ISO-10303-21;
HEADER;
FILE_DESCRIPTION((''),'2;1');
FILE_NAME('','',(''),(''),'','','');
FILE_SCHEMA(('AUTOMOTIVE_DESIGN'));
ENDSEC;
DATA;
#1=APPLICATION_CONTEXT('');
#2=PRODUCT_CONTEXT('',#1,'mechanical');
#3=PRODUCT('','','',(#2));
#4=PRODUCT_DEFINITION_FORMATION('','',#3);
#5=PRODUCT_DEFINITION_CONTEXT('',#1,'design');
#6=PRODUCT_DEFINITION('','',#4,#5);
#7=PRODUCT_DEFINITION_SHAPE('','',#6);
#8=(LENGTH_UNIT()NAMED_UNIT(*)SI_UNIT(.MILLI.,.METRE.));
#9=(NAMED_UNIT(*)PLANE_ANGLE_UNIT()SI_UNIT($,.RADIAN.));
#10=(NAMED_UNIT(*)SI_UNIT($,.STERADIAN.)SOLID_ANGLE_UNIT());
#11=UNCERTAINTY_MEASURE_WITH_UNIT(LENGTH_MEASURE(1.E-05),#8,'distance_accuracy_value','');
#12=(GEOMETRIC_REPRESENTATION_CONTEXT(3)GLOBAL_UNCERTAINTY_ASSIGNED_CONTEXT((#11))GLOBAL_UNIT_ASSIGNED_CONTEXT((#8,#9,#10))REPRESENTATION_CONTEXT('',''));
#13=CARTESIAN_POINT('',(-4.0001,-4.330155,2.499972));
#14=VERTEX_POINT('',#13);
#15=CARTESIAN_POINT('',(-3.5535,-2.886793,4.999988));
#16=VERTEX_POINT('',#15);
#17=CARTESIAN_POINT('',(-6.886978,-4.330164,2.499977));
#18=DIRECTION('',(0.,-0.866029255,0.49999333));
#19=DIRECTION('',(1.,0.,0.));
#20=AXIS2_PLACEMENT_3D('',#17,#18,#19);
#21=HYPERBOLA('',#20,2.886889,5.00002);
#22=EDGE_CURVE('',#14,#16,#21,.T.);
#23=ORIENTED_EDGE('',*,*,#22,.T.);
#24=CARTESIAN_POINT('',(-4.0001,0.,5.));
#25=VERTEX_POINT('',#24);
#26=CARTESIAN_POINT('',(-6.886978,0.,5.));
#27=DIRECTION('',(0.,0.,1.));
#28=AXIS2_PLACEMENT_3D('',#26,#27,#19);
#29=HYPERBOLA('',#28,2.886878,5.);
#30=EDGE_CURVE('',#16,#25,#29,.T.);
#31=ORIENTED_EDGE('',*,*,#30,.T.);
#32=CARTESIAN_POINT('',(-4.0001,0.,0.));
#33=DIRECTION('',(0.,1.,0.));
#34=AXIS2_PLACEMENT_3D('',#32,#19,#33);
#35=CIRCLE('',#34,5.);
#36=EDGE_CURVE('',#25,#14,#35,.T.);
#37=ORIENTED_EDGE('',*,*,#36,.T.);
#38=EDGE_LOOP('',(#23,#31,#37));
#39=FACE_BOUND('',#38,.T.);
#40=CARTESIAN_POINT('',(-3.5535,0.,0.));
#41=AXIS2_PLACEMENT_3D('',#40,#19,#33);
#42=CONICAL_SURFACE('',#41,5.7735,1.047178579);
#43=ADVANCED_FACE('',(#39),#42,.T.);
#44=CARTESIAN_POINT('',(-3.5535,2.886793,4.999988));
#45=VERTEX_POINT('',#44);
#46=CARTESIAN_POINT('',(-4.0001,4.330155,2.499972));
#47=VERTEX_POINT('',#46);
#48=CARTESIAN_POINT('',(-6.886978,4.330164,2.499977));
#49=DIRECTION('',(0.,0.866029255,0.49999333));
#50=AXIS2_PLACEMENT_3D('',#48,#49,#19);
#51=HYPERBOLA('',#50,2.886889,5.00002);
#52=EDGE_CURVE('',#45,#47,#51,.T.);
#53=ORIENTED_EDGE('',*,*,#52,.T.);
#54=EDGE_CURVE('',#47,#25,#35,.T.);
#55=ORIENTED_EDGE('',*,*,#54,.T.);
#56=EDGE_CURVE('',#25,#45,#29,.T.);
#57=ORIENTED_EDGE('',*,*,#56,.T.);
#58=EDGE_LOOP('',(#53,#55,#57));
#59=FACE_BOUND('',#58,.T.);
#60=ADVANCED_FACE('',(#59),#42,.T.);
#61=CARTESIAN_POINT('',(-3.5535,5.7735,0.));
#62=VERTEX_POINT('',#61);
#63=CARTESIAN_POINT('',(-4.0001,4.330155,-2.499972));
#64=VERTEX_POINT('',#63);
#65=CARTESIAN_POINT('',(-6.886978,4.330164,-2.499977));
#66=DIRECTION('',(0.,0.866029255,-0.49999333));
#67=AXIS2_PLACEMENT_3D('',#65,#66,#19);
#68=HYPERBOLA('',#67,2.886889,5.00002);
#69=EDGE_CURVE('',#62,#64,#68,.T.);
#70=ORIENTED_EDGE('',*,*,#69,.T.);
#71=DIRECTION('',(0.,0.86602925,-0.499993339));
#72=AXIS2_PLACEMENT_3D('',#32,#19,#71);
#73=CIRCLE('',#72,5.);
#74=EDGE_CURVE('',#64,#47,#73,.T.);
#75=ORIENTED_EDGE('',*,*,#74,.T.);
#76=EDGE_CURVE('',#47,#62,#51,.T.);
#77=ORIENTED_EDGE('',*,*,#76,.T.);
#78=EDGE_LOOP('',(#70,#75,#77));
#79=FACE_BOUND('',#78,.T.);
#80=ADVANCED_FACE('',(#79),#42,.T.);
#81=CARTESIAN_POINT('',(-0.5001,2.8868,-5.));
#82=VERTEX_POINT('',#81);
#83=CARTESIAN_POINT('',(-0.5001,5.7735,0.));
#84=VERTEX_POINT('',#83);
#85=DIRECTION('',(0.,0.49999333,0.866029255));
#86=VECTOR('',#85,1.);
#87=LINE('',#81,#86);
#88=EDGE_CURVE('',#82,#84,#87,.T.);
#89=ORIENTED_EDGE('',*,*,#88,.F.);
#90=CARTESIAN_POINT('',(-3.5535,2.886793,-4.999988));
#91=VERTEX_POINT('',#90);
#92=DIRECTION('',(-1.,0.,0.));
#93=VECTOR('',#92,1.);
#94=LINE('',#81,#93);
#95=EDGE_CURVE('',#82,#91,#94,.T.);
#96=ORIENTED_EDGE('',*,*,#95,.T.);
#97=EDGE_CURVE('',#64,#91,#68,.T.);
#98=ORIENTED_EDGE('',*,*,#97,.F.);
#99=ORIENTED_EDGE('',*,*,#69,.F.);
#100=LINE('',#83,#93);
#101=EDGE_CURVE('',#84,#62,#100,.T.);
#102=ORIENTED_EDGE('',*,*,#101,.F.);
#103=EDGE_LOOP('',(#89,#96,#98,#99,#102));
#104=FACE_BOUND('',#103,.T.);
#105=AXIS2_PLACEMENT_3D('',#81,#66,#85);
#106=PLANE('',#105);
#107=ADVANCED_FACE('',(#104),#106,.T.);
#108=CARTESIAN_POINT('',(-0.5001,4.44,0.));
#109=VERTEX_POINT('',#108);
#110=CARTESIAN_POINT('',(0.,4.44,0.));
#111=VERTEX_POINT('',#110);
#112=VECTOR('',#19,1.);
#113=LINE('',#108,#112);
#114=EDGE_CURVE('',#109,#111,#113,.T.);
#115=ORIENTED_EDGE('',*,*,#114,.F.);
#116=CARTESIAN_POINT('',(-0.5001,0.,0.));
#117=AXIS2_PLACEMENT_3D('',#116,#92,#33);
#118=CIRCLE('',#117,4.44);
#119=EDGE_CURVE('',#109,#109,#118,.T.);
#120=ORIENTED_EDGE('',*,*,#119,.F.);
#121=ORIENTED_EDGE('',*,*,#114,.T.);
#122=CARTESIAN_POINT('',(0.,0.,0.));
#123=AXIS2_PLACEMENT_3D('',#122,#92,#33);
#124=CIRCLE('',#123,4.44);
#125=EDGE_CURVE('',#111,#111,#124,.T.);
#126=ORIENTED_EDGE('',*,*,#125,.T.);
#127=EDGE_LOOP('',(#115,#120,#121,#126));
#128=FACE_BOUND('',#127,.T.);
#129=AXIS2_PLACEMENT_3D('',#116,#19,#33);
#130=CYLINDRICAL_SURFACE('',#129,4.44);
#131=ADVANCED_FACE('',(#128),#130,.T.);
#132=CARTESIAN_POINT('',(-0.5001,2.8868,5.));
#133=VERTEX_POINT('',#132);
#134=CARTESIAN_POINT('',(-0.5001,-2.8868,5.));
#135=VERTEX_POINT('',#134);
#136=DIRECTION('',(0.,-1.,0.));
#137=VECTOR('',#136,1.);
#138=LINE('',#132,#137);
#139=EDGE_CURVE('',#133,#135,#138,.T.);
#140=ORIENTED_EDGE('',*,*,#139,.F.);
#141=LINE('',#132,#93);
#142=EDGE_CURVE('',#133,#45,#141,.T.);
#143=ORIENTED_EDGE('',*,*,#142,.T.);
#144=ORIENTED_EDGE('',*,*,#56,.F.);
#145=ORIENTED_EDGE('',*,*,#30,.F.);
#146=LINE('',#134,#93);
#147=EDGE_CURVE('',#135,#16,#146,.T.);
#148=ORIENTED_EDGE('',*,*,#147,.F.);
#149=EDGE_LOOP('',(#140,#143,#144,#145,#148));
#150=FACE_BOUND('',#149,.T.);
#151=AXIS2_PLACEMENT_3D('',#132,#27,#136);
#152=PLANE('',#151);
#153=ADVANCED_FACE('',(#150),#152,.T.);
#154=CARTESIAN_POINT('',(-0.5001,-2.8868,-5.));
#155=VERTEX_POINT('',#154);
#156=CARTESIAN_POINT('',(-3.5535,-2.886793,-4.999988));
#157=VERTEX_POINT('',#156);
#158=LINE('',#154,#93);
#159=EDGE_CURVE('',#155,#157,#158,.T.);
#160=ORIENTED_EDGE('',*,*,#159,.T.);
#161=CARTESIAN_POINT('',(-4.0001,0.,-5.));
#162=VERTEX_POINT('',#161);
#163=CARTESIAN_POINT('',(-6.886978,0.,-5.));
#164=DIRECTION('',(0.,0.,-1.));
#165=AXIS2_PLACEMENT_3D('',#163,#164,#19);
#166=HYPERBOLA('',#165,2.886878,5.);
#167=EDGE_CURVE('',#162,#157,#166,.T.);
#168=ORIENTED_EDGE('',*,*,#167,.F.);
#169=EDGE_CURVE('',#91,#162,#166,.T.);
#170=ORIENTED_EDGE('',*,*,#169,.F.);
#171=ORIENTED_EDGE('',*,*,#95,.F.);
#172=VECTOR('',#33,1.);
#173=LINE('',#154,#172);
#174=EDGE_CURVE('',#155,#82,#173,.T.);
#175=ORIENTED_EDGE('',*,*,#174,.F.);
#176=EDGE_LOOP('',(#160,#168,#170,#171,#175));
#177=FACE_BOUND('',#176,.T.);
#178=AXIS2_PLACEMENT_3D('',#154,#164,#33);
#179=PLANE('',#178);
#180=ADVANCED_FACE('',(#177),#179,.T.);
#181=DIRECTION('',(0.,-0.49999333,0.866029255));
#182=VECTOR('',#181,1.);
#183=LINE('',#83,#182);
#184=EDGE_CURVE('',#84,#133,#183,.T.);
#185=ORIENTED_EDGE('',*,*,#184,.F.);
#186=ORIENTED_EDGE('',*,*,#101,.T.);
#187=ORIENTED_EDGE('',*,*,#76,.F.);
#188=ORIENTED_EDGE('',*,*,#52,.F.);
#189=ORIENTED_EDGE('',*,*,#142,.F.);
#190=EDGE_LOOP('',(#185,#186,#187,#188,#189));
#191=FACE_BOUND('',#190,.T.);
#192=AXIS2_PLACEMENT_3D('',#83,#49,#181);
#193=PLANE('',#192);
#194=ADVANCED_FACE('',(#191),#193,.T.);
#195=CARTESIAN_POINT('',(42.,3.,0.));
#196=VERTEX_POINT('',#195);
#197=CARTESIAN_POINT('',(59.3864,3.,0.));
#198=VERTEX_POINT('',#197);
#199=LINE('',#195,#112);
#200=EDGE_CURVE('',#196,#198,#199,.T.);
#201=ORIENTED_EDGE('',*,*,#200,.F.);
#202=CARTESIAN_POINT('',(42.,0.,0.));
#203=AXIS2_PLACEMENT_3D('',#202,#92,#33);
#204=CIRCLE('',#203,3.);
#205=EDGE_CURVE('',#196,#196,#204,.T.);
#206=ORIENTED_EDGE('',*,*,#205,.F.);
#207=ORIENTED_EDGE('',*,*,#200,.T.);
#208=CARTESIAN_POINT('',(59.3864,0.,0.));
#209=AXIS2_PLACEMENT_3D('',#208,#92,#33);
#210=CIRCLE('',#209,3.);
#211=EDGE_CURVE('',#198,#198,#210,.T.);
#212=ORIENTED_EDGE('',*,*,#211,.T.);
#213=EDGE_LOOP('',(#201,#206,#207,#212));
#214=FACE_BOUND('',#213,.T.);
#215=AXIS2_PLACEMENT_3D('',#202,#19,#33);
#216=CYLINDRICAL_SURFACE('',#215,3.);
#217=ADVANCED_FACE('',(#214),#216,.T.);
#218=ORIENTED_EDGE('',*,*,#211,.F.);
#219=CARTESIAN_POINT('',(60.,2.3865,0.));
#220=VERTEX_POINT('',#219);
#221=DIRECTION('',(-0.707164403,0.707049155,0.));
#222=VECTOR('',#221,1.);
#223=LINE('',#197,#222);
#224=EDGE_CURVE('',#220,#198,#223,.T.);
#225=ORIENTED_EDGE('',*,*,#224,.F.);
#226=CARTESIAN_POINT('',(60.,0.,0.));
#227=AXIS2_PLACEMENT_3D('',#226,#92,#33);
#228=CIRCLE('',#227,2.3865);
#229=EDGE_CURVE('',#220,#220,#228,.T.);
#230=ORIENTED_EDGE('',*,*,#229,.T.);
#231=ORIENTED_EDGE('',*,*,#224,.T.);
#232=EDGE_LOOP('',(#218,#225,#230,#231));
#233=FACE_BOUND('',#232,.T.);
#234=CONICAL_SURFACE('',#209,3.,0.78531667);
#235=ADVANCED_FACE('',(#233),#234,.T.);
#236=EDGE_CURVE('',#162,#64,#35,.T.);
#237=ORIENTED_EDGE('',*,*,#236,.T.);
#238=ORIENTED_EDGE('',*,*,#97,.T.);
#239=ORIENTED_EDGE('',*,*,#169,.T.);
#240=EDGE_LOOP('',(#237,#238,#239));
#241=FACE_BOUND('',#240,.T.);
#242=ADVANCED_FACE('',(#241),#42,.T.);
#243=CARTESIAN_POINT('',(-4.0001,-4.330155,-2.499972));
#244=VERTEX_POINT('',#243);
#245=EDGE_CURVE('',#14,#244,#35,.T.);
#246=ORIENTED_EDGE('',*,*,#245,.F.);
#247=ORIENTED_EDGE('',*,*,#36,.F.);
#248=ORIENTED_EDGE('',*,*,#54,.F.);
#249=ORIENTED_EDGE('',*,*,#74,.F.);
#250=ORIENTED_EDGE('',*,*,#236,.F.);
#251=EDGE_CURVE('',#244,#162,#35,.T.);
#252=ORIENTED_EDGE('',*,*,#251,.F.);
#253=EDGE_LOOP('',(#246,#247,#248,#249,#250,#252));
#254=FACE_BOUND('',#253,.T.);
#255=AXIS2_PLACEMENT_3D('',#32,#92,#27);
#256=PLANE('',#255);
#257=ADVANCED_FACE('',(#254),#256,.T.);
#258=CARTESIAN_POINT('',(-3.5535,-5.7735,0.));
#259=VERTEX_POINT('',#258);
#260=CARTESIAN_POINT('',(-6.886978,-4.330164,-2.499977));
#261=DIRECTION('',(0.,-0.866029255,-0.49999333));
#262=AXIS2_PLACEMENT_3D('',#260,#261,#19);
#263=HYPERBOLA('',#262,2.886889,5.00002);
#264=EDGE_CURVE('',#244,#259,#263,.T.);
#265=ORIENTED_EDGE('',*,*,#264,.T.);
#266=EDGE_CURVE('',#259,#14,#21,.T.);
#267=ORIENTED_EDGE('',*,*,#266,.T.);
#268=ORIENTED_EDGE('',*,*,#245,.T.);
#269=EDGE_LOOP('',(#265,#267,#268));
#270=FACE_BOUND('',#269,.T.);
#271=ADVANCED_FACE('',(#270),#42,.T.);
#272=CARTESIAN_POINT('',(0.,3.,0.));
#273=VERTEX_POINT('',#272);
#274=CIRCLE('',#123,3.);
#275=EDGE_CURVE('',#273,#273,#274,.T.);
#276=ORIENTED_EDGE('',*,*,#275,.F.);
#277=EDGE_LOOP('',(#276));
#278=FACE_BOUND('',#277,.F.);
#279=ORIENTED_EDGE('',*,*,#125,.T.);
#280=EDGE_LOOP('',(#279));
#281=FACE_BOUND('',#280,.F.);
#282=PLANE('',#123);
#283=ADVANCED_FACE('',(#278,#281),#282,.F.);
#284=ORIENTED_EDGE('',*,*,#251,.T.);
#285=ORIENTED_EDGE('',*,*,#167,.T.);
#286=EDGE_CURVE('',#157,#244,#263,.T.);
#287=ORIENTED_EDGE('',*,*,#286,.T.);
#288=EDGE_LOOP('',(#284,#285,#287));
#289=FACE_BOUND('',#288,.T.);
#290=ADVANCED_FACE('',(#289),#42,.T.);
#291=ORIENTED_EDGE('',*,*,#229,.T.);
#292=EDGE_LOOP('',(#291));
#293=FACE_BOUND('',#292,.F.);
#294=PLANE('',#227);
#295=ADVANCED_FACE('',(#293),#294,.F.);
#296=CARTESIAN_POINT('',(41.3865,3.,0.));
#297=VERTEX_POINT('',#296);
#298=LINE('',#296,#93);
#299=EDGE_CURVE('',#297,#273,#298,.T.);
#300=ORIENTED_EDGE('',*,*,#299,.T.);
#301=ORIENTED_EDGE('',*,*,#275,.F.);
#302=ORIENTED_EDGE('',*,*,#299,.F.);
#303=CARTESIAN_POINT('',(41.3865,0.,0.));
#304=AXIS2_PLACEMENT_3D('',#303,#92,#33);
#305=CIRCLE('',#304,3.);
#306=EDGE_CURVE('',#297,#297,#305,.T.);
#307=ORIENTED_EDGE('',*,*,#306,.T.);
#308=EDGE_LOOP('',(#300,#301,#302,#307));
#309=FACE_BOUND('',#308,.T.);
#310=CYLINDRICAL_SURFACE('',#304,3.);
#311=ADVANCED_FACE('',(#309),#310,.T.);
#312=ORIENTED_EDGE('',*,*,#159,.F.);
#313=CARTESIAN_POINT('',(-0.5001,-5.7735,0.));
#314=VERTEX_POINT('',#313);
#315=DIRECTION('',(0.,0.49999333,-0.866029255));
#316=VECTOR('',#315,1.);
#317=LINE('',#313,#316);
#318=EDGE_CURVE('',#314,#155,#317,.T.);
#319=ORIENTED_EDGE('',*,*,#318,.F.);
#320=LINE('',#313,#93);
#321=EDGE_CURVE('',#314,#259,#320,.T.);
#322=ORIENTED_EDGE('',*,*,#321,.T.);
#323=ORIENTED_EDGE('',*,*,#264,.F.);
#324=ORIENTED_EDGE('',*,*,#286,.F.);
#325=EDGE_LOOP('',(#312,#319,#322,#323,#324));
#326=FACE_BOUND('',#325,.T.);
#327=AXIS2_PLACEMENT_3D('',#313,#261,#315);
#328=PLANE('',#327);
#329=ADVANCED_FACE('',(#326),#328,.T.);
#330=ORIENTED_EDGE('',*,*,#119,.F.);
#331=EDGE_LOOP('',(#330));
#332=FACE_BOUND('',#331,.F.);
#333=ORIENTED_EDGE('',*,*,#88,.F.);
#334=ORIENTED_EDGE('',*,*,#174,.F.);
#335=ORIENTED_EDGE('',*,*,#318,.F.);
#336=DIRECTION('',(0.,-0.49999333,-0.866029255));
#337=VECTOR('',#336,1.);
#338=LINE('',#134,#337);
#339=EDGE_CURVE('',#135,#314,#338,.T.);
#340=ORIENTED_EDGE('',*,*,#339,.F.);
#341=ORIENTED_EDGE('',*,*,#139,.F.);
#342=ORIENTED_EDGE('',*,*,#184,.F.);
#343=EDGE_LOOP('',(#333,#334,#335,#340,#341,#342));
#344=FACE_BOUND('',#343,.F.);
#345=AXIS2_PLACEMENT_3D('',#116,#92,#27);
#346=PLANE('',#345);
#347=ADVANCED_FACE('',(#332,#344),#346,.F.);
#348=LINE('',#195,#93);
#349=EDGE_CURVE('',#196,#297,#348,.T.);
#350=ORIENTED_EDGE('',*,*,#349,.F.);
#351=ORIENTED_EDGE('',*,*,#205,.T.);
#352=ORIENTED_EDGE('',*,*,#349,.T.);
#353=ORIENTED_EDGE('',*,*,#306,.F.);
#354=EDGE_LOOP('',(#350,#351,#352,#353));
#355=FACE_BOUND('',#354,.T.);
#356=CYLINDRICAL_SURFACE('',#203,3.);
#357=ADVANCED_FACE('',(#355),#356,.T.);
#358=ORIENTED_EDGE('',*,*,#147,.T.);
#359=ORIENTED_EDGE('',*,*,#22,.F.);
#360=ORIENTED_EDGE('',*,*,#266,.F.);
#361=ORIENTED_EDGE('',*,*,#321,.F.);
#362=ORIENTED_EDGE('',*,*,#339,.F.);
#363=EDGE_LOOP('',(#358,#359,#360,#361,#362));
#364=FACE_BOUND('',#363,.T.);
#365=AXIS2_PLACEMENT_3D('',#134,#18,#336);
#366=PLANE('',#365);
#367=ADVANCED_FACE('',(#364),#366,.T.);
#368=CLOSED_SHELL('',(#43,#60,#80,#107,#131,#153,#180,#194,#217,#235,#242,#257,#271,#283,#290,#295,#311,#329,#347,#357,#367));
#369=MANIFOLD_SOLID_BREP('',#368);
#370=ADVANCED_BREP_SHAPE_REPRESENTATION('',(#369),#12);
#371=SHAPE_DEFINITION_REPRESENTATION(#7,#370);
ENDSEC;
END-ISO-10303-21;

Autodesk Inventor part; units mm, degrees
ref_plane "YZ Plane" through (0, 0, 0) normal (1, 0, 0) x (0, 1, 0)
ref_plane "XZ Plane" through (0, 0, 0) normal (0, 1, 0) x (-1, 0, 0)
sketch "Sketch1" plane through (0, 0, 0) normal (0, 0, 1) x (1, 0, 0)
  line L0 (0, 4.44) -> (0, 3)
  line L1 (42, 3) -> (60, 3)
  line L2 (60, 3) -> (60, 0)
  line L3 (60, 0) -> (-0.5001, 0)
  line L4 (-12.6001, 0) -> (72.1, 0) projected
  line L5 (-0.5001, 0) -> (-0.5001, 4.44)
  line L6 (-0.5001, 4.44) -> (0, 4.44)
  line L7 (42, 3) -> (41.3865, 3)
  line L8 (41.3865, 3) -> (0, 3)
  line L9 (0, -0.888) -> (0, 5.328) projected
  dimension "d0" = 60
  dimension "d1" = 18
  dimension "d2" = 6
  dimension "d9" = 0.5001
  dimension "d10" = 8.88
  dimension "d13" = 0.6136
  dimension "d14" = 6
revolve "Body" add sketch "Sketch1" angle 360 about axis through (60, 0, 0) along (-1, 0, 0)
sketch "Sketch2" plane through (-0.5001, 0, 0) normal (-1, 0, 0) x (0, 0, 1)
  line L0 (0, 5.7735) -> (5, 2.8868)
  line L1 (5, 2.8868) -> (5, -2.8868)
  line L2 (5, -2.8868) -> (0, -5.7735)
  line L3 (0, -5.7735) -> (-5, -2.8868)
  line L4 (-5, -2.8868) -> (-5, 2.8868)
  line L5 (-5, 2.8868) -> (0, 5.7735)
  point P0 (0, 0)
  point P1 (0, 0)
  dimension "d11" = 10
extrude "Head" add sketch "Sketch2" along normal blind 3.5
sketch "Sketch4" plane through (0, 0, 0) normal (0, 0, 1) x (1, 0, 0)
  line L0 (-4.0001, 5) -> (-4.0001, 5.7735)
  line L1 (-4.0001, 5.7735) -> (-3.5535, 5.7735)
  line L2 (-3.5535, 5.7735) -> (-4.0001, 5)
  line L3 (-4.7001, 0) -> (0.1999, 0) projected
  line L4 (-0.5001, 5.7735) -> (-4.0001, 5.7735) projected
  line L5 (-4.0001, 2.8868) -> (-4.0001, 5.7735) projected
  dimension "d5" = 30
  dimension "d19" = 10
revolve "Chamfer1" cut sketch "Sketch4" angle 360 about axis through (-10, 0, 0) along (1, 0, 0)
thread "Thread" size "M6x1" class "6g" standard "ISO Metric profile" length 18
chamfer "Chamfer2" distance 0.6135 distance2 0.6136 1 edges at (60, -3, 0) measured on face at (60, 0.0929, 0.8807)
ref_plane "Work Plane1" through (1.525, 0, 0) normal (0, 0, 1) x (1, 0, 0)
equation "\"d0\" = NLG"
equation "\"d1\" = GEL"
equation "\"d2\" = GD"
equation "\"d10\" = SD2"
equation "\"d14\" = BDM"
equation "\"d11\" = SW"
equation "\"d3\" = KOH - SD"
equation "\"d5\" = ANG1"
equation "\"d19\" = SW0"
equation "\"d15\" = GEL"
equation "\"d6\" = -0.5 * SPD + 0.5 * GD"
equation "\"NLG\" = 60"
equation "\"GD\" = NND"
equation "\"BDM\" = NND"
equation "\"KOH\" = 4"
equation "\"GEL\" = 18"
equation "\"SW\" = 10"
equation "\"SW0\" = SW"
equation "\"SPD\" = NND - 1.2269 * PTC"
equation "\"SD2\" = 8.88"
equation "\"SD\" = 0.5"
equation "\"ANG1\" = 30deg"
equation "\"GAL\" = 0.61345 * PTC"
equation "\"GUL\" = 0.61345 * PTC"
equation "\"RR\" = 0.25"
equation "\"GD1\" = THREADDIA - 1.2269 * PTC"
equation "\"THREADDIA\" = 6"
equation "\"SDH\" = SD2"
equation "\"TOA\" = 30deg"
equation "\"PTC\" = 1"
equation "\"NND\" = 6"
equation "\"E0\" = 1.155 * SW"
properties part number "ISO 4014 - M6 x 60" material "Stainless Steel, 440C"
